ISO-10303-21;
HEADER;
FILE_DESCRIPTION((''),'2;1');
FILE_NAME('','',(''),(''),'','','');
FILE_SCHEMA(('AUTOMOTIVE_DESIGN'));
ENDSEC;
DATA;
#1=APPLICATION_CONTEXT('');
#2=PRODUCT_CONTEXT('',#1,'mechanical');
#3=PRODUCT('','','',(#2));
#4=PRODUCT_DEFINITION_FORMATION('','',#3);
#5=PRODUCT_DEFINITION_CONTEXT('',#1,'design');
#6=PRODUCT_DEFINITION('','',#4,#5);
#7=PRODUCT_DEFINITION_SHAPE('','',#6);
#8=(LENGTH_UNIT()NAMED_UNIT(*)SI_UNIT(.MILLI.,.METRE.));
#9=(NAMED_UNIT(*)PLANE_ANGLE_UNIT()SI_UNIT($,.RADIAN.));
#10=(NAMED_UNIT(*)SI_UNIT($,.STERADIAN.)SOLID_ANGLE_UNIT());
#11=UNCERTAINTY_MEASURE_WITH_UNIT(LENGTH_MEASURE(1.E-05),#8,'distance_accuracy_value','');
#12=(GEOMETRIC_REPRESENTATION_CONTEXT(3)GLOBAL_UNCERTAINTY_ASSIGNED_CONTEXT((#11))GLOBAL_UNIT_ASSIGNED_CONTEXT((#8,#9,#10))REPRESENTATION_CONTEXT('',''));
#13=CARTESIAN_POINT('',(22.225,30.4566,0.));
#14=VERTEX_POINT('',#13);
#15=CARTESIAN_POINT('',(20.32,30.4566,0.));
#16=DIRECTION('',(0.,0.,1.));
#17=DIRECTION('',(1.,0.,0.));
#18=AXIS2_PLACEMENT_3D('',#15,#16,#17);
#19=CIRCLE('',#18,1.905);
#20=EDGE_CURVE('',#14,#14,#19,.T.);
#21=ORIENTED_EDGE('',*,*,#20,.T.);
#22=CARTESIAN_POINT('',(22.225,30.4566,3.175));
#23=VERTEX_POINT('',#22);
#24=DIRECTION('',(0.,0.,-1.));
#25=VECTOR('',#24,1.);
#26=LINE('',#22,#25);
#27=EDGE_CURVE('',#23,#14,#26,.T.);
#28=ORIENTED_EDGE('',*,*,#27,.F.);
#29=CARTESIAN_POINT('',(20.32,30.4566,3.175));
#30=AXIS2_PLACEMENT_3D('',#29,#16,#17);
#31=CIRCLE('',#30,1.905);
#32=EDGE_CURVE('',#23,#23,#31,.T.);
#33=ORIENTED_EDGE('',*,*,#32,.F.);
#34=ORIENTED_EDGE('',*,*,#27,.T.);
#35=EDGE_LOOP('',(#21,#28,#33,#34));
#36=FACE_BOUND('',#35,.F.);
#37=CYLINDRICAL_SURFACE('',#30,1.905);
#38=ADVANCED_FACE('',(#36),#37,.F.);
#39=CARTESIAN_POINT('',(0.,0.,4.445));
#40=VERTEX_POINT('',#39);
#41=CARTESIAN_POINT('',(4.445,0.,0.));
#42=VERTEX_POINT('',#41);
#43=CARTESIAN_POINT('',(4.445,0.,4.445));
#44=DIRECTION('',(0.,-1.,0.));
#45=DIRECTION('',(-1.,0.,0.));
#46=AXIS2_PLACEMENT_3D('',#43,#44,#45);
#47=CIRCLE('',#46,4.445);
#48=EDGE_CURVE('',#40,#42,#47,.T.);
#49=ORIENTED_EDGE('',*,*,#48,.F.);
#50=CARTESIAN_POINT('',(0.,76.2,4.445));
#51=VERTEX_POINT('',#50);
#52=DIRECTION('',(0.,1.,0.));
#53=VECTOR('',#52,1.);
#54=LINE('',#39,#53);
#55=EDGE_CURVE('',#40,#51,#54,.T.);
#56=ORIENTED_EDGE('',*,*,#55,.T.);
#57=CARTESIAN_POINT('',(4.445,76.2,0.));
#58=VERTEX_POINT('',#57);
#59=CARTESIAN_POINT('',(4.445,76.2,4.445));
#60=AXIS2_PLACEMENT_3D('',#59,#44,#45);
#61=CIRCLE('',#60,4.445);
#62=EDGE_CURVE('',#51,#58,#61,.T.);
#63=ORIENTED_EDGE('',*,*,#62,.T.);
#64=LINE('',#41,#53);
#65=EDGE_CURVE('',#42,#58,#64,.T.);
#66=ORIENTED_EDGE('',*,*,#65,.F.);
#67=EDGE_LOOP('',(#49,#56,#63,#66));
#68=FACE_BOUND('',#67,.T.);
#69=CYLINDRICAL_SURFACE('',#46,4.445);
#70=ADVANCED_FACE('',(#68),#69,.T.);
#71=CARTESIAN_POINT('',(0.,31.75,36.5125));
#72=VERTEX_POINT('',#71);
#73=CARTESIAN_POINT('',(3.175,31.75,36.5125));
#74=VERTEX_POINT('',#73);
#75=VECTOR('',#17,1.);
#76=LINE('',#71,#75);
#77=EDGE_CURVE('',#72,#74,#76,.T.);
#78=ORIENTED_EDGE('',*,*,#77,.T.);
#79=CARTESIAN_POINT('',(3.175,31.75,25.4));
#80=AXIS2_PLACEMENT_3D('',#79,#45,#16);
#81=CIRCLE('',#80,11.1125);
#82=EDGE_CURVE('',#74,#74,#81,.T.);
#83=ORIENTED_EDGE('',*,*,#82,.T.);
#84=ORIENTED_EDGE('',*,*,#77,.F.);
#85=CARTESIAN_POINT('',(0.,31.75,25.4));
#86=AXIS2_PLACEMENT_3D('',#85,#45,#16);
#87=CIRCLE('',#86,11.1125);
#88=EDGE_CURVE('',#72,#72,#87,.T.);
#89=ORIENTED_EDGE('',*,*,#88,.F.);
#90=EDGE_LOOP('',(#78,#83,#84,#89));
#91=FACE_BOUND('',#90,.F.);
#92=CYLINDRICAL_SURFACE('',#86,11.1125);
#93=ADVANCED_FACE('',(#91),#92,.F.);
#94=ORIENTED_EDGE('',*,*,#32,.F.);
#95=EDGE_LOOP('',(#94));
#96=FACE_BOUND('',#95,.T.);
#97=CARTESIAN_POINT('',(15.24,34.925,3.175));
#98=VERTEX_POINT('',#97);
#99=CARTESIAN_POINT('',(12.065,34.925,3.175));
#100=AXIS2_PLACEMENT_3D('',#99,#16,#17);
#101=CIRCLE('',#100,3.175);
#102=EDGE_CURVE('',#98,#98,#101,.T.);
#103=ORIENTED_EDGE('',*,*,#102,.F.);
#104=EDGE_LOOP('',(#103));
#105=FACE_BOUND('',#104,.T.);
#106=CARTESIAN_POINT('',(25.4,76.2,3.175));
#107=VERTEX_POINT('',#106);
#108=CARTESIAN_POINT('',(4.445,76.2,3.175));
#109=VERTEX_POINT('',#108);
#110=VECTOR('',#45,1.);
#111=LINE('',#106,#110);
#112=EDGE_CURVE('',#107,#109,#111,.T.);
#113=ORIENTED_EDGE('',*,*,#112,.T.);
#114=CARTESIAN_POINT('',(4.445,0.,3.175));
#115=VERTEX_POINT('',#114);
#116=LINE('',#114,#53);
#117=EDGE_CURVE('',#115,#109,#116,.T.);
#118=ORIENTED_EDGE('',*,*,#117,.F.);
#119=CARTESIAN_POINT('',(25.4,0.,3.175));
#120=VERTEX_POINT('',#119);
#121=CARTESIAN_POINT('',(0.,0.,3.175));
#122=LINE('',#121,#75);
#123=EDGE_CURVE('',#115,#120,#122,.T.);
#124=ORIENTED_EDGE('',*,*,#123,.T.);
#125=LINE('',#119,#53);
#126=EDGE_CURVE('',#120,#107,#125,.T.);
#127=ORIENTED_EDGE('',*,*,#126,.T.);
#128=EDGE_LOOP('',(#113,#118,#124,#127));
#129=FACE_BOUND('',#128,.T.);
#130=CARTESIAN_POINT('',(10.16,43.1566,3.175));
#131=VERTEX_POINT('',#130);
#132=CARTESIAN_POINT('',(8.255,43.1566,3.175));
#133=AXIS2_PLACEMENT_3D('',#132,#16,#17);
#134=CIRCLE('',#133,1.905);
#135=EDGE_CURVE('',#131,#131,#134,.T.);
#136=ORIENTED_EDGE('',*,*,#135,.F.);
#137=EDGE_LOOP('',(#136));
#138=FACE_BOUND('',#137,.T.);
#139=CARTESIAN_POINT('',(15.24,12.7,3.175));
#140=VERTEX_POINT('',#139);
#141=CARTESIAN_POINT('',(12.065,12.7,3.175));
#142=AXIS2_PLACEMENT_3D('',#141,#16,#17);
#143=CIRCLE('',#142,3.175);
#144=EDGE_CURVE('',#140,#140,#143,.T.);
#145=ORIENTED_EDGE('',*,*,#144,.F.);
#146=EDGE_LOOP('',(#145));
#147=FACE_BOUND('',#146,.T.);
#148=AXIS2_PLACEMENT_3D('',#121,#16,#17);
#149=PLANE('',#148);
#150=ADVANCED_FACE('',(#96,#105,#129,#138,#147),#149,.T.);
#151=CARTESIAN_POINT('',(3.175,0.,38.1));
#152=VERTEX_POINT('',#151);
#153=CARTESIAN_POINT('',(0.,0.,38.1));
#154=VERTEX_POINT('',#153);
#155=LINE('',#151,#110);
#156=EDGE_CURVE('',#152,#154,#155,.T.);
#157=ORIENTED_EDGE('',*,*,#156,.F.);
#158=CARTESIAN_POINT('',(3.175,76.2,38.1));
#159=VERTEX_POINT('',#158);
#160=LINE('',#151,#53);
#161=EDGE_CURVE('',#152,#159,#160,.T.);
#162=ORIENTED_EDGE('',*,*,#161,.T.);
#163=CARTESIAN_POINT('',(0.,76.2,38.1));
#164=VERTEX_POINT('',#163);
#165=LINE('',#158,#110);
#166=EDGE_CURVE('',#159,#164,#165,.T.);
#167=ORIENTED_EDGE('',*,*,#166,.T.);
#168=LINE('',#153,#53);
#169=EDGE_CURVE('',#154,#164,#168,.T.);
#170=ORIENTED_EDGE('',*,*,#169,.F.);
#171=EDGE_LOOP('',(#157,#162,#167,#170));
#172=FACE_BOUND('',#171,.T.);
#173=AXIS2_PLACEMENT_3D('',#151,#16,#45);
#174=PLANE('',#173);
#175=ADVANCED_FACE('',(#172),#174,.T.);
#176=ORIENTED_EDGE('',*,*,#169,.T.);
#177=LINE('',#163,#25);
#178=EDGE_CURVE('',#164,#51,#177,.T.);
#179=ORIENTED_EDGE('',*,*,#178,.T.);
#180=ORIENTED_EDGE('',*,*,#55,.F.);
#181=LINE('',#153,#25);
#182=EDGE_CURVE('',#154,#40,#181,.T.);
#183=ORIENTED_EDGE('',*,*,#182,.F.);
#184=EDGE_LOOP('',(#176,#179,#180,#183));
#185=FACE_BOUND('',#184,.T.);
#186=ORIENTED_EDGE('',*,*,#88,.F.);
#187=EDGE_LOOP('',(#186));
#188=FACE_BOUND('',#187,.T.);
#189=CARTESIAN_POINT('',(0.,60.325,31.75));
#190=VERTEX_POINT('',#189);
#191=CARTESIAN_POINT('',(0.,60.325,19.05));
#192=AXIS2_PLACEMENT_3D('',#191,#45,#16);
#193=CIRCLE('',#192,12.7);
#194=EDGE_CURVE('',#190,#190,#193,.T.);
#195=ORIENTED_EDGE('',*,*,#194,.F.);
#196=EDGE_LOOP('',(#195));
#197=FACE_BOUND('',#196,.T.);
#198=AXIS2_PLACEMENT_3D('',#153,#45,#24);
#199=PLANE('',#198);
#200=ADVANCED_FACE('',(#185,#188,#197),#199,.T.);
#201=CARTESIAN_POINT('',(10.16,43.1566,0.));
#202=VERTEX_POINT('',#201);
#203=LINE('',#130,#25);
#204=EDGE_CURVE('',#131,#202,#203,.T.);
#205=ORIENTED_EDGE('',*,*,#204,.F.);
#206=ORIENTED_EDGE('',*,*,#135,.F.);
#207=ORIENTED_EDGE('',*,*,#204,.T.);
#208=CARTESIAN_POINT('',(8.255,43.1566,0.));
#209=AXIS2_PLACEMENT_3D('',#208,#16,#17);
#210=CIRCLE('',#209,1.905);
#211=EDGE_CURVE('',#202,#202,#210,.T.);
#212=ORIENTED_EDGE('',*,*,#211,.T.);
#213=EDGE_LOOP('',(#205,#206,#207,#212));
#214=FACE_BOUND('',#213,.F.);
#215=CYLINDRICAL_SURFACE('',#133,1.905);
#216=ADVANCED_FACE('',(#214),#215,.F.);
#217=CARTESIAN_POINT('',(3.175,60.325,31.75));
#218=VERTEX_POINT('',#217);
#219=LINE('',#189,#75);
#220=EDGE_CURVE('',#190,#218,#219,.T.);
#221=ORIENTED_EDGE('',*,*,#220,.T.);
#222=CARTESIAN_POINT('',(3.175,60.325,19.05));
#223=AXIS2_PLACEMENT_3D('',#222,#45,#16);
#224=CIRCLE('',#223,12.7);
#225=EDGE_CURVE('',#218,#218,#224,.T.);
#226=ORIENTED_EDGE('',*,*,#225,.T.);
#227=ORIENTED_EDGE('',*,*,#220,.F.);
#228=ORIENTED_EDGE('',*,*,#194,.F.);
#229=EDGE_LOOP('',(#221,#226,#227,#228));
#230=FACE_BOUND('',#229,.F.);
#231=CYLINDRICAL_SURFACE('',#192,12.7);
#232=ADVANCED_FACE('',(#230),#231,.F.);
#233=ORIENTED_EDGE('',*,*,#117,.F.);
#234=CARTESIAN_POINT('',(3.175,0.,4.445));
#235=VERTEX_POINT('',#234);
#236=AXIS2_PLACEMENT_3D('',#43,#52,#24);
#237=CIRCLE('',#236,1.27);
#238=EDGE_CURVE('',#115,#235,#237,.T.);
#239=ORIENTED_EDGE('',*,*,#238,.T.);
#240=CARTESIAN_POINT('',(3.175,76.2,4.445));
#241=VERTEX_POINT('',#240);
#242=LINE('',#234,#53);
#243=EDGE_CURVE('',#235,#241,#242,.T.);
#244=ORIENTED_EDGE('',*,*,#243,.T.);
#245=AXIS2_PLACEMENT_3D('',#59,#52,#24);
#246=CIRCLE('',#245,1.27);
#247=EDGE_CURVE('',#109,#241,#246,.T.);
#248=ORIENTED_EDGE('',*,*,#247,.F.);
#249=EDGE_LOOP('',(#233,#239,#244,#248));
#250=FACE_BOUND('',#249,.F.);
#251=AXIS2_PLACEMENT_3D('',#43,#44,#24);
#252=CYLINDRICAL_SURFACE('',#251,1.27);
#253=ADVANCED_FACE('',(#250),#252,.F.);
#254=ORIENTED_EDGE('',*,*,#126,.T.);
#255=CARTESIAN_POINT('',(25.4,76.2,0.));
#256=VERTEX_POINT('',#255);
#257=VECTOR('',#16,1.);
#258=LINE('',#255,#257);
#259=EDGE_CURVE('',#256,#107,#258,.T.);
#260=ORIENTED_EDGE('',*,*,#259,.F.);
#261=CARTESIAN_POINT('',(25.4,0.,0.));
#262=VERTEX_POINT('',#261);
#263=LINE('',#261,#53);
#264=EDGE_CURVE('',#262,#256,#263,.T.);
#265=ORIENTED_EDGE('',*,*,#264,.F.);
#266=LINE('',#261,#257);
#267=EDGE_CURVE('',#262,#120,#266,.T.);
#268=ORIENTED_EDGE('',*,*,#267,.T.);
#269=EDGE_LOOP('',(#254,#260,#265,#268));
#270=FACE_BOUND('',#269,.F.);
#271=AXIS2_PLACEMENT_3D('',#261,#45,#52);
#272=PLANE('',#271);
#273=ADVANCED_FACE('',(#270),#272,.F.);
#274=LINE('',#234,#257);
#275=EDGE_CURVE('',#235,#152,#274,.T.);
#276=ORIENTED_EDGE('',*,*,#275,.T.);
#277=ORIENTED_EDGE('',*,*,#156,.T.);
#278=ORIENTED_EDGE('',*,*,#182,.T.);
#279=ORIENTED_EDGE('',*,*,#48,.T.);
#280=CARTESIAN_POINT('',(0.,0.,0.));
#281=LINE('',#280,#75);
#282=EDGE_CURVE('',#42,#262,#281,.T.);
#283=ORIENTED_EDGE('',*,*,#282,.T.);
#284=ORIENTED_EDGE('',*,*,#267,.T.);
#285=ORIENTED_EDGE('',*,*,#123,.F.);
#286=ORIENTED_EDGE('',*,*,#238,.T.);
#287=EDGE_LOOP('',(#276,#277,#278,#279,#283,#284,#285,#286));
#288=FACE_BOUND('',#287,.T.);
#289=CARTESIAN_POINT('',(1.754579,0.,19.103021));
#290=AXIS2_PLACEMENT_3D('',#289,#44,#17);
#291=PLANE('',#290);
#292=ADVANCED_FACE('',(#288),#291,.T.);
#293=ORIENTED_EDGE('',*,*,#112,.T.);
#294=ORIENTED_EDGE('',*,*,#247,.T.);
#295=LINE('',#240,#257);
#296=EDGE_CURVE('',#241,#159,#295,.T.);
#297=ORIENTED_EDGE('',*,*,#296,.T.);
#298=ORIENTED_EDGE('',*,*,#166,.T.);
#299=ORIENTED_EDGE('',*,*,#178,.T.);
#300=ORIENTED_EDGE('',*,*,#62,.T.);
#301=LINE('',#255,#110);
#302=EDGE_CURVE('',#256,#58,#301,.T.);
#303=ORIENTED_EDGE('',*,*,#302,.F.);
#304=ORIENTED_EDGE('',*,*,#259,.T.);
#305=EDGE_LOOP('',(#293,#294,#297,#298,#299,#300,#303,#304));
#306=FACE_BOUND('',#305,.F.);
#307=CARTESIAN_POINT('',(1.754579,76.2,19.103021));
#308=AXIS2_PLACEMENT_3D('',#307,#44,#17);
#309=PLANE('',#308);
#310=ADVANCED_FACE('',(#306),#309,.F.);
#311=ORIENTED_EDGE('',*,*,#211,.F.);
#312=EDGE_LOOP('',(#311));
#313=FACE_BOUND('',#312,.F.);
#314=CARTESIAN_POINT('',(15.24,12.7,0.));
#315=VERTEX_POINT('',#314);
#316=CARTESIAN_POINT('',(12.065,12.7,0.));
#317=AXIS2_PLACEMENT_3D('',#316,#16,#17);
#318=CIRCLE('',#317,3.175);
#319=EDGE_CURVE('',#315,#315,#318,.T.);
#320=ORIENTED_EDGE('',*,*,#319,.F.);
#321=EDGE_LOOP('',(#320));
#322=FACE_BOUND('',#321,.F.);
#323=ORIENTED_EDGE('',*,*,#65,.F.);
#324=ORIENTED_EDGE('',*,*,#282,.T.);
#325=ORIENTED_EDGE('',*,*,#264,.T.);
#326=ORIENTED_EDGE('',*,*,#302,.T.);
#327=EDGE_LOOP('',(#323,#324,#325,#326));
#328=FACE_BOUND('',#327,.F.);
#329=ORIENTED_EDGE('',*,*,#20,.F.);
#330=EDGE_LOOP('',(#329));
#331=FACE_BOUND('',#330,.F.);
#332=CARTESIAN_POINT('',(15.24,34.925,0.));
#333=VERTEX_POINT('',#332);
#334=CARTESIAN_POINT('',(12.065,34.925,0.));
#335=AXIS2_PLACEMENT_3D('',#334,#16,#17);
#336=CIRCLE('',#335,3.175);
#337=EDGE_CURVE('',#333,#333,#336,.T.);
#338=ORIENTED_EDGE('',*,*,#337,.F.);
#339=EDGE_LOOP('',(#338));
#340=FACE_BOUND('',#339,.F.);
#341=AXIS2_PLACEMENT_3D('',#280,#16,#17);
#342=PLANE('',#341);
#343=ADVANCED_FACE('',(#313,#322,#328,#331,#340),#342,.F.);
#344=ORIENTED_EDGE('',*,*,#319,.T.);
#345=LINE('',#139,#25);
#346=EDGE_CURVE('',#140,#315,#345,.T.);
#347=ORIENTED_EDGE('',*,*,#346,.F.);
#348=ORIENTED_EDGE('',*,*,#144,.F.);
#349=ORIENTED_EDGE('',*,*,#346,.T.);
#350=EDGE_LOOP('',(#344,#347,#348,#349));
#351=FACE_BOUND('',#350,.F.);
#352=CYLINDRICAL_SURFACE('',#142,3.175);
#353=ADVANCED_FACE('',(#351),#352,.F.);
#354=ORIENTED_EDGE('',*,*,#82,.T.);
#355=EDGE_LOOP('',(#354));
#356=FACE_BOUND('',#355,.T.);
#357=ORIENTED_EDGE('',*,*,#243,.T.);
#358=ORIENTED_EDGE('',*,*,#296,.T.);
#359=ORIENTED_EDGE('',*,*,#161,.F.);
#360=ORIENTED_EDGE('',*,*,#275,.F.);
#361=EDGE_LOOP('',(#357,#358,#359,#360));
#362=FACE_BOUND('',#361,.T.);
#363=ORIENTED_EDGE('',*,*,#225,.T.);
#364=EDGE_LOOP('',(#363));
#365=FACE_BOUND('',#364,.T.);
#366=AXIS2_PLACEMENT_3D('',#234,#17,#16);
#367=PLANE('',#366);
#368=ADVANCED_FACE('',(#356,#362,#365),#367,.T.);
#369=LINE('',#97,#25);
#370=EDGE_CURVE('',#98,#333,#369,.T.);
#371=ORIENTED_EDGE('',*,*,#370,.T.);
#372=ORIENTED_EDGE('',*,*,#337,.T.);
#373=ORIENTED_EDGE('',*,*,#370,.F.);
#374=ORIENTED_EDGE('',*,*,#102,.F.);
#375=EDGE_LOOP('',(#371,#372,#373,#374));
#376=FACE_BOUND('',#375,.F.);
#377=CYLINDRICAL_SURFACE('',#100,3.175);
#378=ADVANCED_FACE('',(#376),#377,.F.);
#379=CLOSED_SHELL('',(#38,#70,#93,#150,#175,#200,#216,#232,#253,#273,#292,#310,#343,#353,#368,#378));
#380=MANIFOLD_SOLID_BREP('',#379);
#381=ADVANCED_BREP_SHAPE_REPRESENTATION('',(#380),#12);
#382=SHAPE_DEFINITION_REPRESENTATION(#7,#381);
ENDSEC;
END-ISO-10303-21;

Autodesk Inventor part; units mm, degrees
ref_plane "YZ Plane" through (0, 0, 0) normal (1, 0, 0) x (0, 1, 0)
ref_plane "XZ Plane" through (0, 0, 0) normal (0, 1, 0) x (-1, 0, 0)
ref_plane "XY Plane" through (0, 0, 0) normal (0, 0, 1) x (1, 0, 0)
sketch "Sketch1" plane through (0, 0, 0) normal (0, 0, 1) x (1, 0, 0)
  line L0 (0, 0) -> (25.4, 0)
  line L1 (25.4, 0) -> (25.4, 76.2)
  line L2 (25.4, 76.2) -> (0, 76.2)
  line L3 (0, 76.2) -> (0, 0)
  dimension "d0" = 25.4
  dimension "d1" = 76.2
extrude "Plate1" add sketch "Sketch1" along normal blind 3.175
sketch "Sketch2" plane through (3.175, 0, 0) normal (-1, 0, 0) x (0, -1, 0)
  line L0 (-76.2, 0) -> (0, 0)
  line L1 (0, 0) -> (0, 38.1)
  line L2 (0, 38.1) -> (-76.2, 38.1)
  line L3 (-76.2, 38.1) -> (-76.2, 0)
edge flange "Flange1" height 38.1 angle 90 thickness 3.175 bend radius 1.27 thickness toward (-1, 0, 0) relief tear relief width 3.175 relief depth 1.5875 edges at (0, 38.1, 3.175) wall of the first edge with corners at (3.175, 76.2, 0) (3.175, 0, 0) (3.175, 0, 38.1) (3.175, 76.2, 38.1)
bend "Bend1"
corner "Corner1"
sketch "Sketch3" plane through (0, 0, 38.1) normal (-1, 0, 0) x (0, 0, 1)
  line L0 (0, 0) -> (-33.655, 0) projected
  line L1 (0, 76.2) -> (0, 0) projected
  line L2 (-33.655, 76.2) -> (0, 76.2) projected
  circle A0 centre (-19.05, 60.325) radius 12.7
  circle A1 centre (-12.7, 31.75) radius 11.1125
  point P0 (-38.1, 0)
  dimension "d13" = 25.4
  dimension "d14" = 22.225
  dimension "d15" = 15.875
  dimension "d16" = 19.05
  dimension "d17" = 12.7
  dimension "d18" = 31.75
extrude "Cut1" cut sketch "Sketch3" against normal blind 3.175
sketch "Sketch4" plane through (0, 0, 3.175) normal (0, 0, 1) x (1, 0, 0)
  line L0 (4.445, 76.2) -> (4.445, 0) projected
  line L1 (25.4, 76.2) -> (25.4, 0) projected
  circle A0 centre (-69.6884, -88.0779) radius 3.3782 construction
  circle A1 centre (-79.6289, 46.8501) radius 3.3782 construction
  circle A2 centre (-113.1559, 49.7834) radius 3.3782 construction
  circle A3 centre (-43.9071, -66.4449) radius 3.3782 construction
  line L2 (-118.5182, 63.001) -> (-315.8997, 80.2697) construction
  arc A4 (-315.8997, 80.2697) -> (-318.1134, 54.9663) centre (74.9912, 33.3226) ccw construction
  line L3 (-318.1134, 54.9663) -> (38.1, 23.8017) construction
  arc A5 (38.1, 23.8017) -> (42.1314, 14.0393) centre (74.9912, 33.3226) ccw construction
  line L4 (42.1314, 14.0393) -> (-230.643, -214.8455) construction
  arc A6 (-230.643, -214.8455) -> (-226.6005, -219.7429) centre (74.9912, 33.3226) ccw construction
  line L5 (-226.6005, -219.7429) -> (-222.5188, -224.6072) construction
  line L6 (-222.5188, -224.6072) -> (50.2948, 4.3106) construction
  arc A7 (50.2948, 4.3106) -> (55.7079, 66.1824) centre (74.9912, 33.3226) ccw construction
  line L7 (55.7079, 66.1824) -> (15.7878, 113.7573) construction
  arc A8 (-3.434, 116.9073) -> (15.7878, 113.7573) centre (29.7432, 259.139) ccw construction
  line L8 (-3.434, 116.9073) -> (-110.1078, 141.7901) construction
  line L9 (-110.1078, 141.7901) -> (-116.0889, 251.1642) construction
  arc A9 (-115.8532, 270.641) -> (-116.0889, 251.1642) centre (29.7432, 259.139) ccw construction
  line L10 (-115.8532, 270.641) -> (-173.2099, 338.996) construction
  line L11 (-173.2099, 338.996) -> (-178.0743, 334.9143) construction
  arc A10 (-178.0743, 334.9143) -> (-182.9057, 330.7934) centre (74.9912, 33.3226) ccw construction
  line L12 (-182.9057, 330.7934) -> (-129.6946, 267.3788) construction
  line L13 (-129.6946, 267.3788) -> (-118.5182, 63.001) construction
  circle A11 centre (-173.9926, 330.0499) radius 3.3782 construction
  circle A12 centre (-141.339, 291.1349) radius 3.3782 construction
  line L14 (-105.7381, 61.8829) -> (-109.3854, 128.5807) construction
  line L15 (-109.3854, 128.5807) -> (10.1717, 100.6927) construction
  line L16 (10.1717, 100.6927) -> (45.9792, 58.019) construction
  arc A13 (45.9792, 58.019) -> (40.3138, 49.105) centre (74.9912, 33.3226) ccw construction
  line L17 (40.3138, 49.105) -> (-105.7381, 61.8829) construction
  circle A14 centre (74.9912, 33.3226) radius 9.5 construction
  circle A15 centre (-310.4012, 72.216) radius 3.3782 construction
  circle A16 centre (-311.3, 61.9429) radius 3.3782 construction
  circle A17 centre (-259.7945, 67.7885) radius 3.3782 construction
  circle A18 centre (-260.6933, 57.5153) radius 3.3782 construction
  circle A19 centre (-221.7361, -215.6611) radius 3.3782 construction
  circle A20 centre (-182.821, -183.0075) radius 3.3782 construction
  circle A21 centre (-32.0252, -56.4748) radius 3.3782 construction
  circle A22 centre (-139.0416, -146.2722) radius 3.3782 construction
  circle A23 centre (-63.4799, 51.8115) radius 3.3782 construction
  circle A24 centre (-64.5868, 39.1599) radius 3.3782 construction
  circle A25 centre (-202.7203, 63.9935) radius 3.3782 construction
  circle A26 centre (-203.8271, 51.3418) radius 3.3782 construction
  circle A27 centre (20.32, 30.4566) radius 1.905
  circle A28 centre (8.255, 43.1566) radius 1.905
  line L18 (25.4, 0) -> (4.445, 0) projected
  line L19 (4.445, 76.2) -> (25.4, 76.2) projected
  line L20 (12.065, 76.2) -> (12.065, 0) construction
  circle A29 centre (12.065, 12.7) radius 3.175
  circle A30 centre (12.065, 34.925) radius 3.175
  point P0 (0, 0)
  dimension "d21" = 3.81
  dimension "d22" = 5.08
  dimension "d23" = 5.08
  dimension "d24" = 12.7
  dimension "d25" = 3.81
  dimension "d28" = 7.62
  dimension "d29" = 6.35
  dimension "d30" = 12.7
  dimension "d31" = 22.225
extrude "Cut2" cut sketch "Sketch4" against normal blind 3.175 contours A27 | A28 | A29 | A30
equation "\"d19\" = Thickness"
equation "\"d26\" = Thickness"
equation "\"d3\" = BendReliefWidth"
equation "\"d4\" = BendReliefDepth"
equation "\"d5\" = MinimumRemnant"
equation "\"d6\" = BendRadius"
equation "\"d10\" = CornerReliefSize"
equation "\"d11\" = GapSize"
equation "\"d12\" = JacobiRadiusSize"
equation "\"BendRadius\" = Thickness"
equation "\"BendReliefWidth\" = Thickness"
equation "\"BendReliefDepth\" = 0.5 * Thickness"
equation "\"CornerReliefSize\" = 4 * Thickness"
equation "\"MinimumRemnant\" = 2 * Thickness"
equation "\"TransitionRadius\" = BendRadius"
equation "\"JacobiRadiusSize\" = BendRadius"
equation "\"GapSize\" = Thickness"
equation "\"d2\" = BendRadius"
equation "\"Thickness\" = 3.175"
properties part number "Shooter Magnetic Sensor Mount Bracket" material "Aluminum 6061"
